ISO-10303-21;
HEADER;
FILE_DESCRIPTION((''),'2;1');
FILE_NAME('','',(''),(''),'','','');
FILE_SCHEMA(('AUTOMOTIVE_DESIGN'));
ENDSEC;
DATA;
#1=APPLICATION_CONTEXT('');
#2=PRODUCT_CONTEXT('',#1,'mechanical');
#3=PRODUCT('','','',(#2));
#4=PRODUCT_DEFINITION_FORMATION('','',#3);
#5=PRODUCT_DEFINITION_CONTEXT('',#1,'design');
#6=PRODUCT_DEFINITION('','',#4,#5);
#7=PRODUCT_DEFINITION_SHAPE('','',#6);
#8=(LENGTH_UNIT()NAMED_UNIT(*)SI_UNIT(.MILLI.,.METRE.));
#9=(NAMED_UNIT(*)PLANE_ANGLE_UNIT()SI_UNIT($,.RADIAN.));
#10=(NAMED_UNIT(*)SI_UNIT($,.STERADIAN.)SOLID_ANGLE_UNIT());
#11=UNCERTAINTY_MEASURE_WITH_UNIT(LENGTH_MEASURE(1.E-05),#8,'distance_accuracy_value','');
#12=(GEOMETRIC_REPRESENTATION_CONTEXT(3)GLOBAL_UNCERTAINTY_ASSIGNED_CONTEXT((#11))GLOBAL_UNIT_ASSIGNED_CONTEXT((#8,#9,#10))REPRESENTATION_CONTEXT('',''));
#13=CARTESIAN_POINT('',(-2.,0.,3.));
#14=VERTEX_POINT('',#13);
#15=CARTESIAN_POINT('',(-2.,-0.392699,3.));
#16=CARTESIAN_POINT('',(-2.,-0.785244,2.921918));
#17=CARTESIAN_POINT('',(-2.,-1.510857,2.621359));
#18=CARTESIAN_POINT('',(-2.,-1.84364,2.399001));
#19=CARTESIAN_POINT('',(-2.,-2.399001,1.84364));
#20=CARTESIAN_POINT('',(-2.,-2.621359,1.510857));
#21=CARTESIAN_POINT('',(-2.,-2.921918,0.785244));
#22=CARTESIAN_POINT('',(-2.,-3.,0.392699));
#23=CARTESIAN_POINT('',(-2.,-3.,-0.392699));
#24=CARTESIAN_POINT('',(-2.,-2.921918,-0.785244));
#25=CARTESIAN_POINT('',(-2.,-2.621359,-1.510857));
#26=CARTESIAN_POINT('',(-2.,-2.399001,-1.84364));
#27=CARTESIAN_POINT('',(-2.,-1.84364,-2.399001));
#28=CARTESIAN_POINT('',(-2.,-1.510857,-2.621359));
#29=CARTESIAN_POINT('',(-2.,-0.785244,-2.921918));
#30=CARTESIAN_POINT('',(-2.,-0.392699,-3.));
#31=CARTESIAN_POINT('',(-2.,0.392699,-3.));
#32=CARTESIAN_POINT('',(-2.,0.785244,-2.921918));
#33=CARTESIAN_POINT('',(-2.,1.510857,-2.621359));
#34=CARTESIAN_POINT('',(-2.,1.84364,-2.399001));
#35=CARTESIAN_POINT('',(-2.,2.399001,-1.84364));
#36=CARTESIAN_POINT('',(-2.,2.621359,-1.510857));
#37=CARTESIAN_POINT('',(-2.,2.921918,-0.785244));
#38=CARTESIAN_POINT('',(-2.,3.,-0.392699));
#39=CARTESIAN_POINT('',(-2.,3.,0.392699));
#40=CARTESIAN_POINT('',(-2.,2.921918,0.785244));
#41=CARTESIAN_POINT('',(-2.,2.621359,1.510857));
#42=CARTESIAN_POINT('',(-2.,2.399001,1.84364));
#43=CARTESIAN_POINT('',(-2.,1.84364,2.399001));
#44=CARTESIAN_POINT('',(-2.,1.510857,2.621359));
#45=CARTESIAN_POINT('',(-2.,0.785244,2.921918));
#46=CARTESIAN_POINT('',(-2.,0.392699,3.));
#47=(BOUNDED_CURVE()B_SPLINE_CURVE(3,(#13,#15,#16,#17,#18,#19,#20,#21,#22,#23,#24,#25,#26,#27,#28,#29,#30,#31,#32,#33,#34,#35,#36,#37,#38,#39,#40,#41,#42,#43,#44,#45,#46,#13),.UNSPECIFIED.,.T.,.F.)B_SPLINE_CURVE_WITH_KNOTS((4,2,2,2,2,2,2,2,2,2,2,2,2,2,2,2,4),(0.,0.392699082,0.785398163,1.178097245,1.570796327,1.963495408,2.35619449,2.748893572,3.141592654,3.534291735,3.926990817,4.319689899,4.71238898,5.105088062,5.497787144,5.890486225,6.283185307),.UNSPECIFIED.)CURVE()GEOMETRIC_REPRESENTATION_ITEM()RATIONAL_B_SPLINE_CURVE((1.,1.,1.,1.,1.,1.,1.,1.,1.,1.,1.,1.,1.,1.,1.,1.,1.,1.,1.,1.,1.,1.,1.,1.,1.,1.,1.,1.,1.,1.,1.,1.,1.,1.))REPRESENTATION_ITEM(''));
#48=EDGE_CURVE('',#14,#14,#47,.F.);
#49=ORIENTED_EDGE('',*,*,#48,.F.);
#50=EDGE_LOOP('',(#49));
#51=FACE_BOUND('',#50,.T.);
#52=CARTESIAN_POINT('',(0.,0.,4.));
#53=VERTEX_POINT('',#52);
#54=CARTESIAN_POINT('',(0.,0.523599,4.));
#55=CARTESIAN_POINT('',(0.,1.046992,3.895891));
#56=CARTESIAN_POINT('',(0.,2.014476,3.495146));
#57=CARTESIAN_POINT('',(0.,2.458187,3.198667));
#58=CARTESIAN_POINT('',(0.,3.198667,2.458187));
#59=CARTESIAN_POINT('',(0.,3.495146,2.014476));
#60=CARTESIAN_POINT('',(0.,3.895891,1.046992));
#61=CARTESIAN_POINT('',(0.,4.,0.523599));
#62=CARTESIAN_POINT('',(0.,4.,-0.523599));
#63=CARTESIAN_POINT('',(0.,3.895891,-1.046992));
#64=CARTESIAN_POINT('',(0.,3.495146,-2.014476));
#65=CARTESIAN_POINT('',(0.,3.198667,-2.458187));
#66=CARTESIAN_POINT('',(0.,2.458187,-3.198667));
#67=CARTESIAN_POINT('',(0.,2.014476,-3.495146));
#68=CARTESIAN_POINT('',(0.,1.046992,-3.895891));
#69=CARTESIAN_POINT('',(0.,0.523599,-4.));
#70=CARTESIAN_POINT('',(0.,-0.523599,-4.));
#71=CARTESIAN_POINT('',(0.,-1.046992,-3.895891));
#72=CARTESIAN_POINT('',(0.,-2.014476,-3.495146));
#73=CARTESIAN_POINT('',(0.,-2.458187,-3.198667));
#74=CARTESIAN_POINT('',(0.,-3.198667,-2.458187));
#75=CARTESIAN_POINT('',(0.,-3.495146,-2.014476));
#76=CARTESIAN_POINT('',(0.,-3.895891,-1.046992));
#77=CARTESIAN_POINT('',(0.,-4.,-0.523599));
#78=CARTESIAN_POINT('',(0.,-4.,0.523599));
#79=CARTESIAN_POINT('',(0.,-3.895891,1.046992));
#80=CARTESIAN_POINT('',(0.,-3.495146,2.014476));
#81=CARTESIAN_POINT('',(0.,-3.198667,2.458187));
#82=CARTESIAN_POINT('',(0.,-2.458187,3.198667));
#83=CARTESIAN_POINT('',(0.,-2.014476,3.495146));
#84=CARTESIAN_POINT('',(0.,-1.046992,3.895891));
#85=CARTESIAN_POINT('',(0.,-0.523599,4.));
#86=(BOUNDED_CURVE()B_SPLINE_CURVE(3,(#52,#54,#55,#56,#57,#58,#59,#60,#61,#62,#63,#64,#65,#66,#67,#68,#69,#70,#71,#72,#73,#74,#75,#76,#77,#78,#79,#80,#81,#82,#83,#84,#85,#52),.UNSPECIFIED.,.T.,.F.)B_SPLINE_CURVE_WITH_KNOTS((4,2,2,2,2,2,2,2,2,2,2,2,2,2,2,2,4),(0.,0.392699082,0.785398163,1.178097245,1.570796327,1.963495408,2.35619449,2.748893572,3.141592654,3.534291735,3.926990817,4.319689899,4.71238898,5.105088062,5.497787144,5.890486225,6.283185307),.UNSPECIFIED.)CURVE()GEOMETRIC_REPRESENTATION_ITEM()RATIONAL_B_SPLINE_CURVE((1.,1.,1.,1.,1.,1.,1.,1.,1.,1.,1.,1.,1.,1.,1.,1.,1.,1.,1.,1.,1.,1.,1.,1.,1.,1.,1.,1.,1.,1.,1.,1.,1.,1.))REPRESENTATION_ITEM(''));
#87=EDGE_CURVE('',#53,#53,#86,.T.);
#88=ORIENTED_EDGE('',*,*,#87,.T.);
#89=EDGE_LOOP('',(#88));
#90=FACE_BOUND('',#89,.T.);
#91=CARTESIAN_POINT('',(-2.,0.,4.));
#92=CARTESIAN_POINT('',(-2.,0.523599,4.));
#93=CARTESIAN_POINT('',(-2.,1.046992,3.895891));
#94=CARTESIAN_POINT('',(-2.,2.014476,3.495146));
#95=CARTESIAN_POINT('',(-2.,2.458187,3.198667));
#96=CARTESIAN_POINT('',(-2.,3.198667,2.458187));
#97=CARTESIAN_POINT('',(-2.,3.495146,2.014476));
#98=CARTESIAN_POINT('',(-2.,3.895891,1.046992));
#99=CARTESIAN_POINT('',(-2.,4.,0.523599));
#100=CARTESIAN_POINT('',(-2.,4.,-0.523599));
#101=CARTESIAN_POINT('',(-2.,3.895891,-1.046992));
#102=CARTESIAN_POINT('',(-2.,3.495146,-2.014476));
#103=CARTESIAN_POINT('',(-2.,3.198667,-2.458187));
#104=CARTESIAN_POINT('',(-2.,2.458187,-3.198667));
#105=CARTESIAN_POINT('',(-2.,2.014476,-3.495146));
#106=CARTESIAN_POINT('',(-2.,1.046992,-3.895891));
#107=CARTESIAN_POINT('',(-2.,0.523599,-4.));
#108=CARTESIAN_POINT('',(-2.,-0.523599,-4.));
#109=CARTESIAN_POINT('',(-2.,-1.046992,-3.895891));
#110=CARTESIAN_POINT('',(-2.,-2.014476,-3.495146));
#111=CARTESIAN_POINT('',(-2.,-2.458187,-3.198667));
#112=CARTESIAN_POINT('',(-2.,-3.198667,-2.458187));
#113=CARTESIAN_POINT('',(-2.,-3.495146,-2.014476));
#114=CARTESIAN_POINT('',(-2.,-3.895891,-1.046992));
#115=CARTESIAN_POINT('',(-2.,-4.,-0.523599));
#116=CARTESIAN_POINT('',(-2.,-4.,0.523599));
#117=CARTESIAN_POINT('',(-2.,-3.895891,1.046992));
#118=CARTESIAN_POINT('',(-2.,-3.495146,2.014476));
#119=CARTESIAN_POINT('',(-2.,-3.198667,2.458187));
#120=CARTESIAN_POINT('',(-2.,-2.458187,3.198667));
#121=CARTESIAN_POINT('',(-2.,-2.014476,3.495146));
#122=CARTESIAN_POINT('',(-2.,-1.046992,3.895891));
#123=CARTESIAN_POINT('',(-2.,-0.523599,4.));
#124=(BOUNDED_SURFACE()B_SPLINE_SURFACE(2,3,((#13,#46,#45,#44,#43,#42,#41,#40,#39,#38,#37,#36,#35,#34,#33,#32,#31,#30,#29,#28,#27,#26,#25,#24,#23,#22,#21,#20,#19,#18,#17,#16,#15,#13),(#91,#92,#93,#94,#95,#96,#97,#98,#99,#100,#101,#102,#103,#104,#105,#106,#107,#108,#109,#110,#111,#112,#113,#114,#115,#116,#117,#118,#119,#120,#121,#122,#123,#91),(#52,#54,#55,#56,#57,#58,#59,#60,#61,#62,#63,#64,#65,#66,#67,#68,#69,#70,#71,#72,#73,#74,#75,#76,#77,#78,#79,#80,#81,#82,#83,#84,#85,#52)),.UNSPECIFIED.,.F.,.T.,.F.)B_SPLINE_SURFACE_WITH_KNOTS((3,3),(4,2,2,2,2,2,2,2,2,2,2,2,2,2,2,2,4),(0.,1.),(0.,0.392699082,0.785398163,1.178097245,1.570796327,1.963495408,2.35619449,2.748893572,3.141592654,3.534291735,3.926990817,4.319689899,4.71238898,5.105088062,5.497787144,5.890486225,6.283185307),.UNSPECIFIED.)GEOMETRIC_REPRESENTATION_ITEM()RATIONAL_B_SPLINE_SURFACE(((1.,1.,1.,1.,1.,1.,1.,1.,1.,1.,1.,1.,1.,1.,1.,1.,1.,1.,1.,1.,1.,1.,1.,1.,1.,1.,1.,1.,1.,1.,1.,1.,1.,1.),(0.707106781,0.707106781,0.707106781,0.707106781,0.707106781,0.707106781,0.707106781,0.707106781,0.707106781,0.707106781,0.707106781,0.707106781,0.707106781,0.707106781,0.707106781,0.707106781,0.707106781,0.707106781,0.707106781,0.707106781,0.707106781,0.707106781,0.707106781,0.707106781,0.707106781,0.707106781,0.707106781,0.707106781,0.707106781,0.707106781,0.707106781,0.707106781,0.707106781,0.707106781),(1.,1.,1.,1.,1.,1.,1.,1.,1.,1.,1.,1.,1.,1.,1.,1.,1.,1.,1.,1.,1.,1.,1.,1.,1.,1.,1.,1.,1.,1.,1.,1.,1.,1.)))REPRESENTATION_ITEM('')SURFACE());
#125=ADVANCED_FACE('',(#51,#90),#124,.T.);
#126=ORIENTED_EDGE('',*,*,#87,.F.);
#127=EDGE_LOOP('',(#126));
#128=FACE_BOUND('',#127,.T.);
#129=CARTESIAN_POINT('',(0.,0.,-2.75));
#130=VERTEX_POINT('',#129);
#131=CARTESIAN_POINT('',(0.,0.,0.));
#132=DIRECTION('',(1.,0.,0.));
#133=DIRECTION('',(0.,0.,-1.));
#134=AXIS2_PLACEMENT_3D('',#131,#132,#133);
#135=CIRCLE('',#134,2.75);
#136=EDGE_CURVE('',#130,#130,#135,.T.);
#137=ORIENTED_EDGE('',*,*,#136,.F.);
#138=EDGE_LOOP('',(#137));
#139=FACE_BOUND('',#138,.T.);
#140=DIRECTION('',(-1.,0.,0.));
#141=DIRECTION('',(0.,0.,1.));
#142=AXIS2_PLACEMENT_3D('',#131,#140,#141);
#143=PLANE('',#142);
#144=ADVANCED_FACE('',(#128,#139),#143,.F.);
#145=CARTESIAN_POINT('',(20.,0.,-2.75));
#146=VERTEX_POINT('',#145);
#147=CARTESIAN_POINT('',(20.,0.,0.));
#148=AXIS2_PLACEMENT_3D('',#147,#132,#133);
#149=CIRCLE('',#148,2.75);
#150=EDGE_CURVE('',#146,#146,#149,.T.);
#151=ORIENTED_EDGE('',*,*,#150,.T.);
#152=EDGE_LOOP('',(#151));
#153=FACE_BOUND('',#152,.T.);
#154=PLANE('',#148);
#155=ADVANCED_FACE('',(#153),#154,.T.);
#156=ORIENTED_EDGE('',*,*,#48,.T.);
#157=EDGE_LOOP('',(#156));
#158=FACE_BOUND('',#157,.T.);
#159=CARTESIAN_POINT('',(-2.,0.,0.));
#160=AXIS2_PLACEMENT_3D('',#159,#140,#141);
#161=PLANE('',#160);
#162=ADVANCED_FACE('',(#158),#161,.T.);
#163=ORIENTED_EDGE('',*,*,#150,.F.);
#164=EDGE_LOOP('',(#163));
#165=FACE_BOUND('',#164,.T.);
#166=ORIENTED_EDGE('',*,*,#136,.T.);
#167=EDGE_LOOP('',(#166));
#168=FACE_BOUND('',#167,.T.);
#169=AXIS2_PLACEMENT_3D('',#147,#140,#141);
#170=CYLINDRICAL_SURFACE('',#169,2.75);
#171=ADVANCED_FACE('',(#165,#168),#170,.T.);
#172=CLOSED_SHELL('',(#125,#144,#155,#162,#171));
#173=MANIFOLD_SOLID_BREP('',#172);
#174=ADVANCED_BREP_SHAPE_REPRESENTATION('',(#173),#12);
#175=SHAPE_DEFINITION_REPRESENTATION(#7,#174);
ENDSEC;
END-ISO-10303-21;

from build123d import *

# Parameters (mm, degrees)
SKETCH1_R           = 2.75
BOSS_EXTRUDE1_DEPTH = 20
SKETCH2_R           = 4
BOSS_EXTRUDE2_DEPTH = 2
FILLET1_SIZE        = 2
FILLET1_SIZE_2      = 1


with BuildPart() as part:
    # Sketch1 → Boss-Extrude1 (new body)
    with BuildSketch(Plane(origin=(0, 0, 0), x_dir=(0, 0, -1), z_dir=(1, 0, 0))):
        Circle(SKETCH1_R)
    extrude(amount=BOSS_EXTRUDE1_DEPTH)

    # Sketch2 → Boss-Extrude2 (add)
    with BuildSketch(Plane.ZY):
        Circle(SKETCH2_R)
    extrude(amount=BOSS_EXTRUDE2_DEPTH)

    # Fillet1
    # an asymmetric fillet: 2, 1 mm, written as the material it takes off along each edge
    with BuildSketch(Plane(origin=(-2, 0, 0), x_dir=(0, 0, 1), z_dir=(0, -1, 0))) as fillet1_piece_1:
        with BuildLine():
            Bezier((4, -FILLET1_SIZE), (4, 0), (4 - FILLET1_SIZE_2, 0), weights=[1, 0.707106781, 1])
            Line((4 - FILLET1_SIZE_2, 0), (4, 0))
            Line((4, 0), (4, -FILLET1_SIZE))
        make_face()
    revolve(axis=Axis((-2, 0, 0), (-1, 0, 0)), mode=Mode.SUBTRACT)


solid = part.part
